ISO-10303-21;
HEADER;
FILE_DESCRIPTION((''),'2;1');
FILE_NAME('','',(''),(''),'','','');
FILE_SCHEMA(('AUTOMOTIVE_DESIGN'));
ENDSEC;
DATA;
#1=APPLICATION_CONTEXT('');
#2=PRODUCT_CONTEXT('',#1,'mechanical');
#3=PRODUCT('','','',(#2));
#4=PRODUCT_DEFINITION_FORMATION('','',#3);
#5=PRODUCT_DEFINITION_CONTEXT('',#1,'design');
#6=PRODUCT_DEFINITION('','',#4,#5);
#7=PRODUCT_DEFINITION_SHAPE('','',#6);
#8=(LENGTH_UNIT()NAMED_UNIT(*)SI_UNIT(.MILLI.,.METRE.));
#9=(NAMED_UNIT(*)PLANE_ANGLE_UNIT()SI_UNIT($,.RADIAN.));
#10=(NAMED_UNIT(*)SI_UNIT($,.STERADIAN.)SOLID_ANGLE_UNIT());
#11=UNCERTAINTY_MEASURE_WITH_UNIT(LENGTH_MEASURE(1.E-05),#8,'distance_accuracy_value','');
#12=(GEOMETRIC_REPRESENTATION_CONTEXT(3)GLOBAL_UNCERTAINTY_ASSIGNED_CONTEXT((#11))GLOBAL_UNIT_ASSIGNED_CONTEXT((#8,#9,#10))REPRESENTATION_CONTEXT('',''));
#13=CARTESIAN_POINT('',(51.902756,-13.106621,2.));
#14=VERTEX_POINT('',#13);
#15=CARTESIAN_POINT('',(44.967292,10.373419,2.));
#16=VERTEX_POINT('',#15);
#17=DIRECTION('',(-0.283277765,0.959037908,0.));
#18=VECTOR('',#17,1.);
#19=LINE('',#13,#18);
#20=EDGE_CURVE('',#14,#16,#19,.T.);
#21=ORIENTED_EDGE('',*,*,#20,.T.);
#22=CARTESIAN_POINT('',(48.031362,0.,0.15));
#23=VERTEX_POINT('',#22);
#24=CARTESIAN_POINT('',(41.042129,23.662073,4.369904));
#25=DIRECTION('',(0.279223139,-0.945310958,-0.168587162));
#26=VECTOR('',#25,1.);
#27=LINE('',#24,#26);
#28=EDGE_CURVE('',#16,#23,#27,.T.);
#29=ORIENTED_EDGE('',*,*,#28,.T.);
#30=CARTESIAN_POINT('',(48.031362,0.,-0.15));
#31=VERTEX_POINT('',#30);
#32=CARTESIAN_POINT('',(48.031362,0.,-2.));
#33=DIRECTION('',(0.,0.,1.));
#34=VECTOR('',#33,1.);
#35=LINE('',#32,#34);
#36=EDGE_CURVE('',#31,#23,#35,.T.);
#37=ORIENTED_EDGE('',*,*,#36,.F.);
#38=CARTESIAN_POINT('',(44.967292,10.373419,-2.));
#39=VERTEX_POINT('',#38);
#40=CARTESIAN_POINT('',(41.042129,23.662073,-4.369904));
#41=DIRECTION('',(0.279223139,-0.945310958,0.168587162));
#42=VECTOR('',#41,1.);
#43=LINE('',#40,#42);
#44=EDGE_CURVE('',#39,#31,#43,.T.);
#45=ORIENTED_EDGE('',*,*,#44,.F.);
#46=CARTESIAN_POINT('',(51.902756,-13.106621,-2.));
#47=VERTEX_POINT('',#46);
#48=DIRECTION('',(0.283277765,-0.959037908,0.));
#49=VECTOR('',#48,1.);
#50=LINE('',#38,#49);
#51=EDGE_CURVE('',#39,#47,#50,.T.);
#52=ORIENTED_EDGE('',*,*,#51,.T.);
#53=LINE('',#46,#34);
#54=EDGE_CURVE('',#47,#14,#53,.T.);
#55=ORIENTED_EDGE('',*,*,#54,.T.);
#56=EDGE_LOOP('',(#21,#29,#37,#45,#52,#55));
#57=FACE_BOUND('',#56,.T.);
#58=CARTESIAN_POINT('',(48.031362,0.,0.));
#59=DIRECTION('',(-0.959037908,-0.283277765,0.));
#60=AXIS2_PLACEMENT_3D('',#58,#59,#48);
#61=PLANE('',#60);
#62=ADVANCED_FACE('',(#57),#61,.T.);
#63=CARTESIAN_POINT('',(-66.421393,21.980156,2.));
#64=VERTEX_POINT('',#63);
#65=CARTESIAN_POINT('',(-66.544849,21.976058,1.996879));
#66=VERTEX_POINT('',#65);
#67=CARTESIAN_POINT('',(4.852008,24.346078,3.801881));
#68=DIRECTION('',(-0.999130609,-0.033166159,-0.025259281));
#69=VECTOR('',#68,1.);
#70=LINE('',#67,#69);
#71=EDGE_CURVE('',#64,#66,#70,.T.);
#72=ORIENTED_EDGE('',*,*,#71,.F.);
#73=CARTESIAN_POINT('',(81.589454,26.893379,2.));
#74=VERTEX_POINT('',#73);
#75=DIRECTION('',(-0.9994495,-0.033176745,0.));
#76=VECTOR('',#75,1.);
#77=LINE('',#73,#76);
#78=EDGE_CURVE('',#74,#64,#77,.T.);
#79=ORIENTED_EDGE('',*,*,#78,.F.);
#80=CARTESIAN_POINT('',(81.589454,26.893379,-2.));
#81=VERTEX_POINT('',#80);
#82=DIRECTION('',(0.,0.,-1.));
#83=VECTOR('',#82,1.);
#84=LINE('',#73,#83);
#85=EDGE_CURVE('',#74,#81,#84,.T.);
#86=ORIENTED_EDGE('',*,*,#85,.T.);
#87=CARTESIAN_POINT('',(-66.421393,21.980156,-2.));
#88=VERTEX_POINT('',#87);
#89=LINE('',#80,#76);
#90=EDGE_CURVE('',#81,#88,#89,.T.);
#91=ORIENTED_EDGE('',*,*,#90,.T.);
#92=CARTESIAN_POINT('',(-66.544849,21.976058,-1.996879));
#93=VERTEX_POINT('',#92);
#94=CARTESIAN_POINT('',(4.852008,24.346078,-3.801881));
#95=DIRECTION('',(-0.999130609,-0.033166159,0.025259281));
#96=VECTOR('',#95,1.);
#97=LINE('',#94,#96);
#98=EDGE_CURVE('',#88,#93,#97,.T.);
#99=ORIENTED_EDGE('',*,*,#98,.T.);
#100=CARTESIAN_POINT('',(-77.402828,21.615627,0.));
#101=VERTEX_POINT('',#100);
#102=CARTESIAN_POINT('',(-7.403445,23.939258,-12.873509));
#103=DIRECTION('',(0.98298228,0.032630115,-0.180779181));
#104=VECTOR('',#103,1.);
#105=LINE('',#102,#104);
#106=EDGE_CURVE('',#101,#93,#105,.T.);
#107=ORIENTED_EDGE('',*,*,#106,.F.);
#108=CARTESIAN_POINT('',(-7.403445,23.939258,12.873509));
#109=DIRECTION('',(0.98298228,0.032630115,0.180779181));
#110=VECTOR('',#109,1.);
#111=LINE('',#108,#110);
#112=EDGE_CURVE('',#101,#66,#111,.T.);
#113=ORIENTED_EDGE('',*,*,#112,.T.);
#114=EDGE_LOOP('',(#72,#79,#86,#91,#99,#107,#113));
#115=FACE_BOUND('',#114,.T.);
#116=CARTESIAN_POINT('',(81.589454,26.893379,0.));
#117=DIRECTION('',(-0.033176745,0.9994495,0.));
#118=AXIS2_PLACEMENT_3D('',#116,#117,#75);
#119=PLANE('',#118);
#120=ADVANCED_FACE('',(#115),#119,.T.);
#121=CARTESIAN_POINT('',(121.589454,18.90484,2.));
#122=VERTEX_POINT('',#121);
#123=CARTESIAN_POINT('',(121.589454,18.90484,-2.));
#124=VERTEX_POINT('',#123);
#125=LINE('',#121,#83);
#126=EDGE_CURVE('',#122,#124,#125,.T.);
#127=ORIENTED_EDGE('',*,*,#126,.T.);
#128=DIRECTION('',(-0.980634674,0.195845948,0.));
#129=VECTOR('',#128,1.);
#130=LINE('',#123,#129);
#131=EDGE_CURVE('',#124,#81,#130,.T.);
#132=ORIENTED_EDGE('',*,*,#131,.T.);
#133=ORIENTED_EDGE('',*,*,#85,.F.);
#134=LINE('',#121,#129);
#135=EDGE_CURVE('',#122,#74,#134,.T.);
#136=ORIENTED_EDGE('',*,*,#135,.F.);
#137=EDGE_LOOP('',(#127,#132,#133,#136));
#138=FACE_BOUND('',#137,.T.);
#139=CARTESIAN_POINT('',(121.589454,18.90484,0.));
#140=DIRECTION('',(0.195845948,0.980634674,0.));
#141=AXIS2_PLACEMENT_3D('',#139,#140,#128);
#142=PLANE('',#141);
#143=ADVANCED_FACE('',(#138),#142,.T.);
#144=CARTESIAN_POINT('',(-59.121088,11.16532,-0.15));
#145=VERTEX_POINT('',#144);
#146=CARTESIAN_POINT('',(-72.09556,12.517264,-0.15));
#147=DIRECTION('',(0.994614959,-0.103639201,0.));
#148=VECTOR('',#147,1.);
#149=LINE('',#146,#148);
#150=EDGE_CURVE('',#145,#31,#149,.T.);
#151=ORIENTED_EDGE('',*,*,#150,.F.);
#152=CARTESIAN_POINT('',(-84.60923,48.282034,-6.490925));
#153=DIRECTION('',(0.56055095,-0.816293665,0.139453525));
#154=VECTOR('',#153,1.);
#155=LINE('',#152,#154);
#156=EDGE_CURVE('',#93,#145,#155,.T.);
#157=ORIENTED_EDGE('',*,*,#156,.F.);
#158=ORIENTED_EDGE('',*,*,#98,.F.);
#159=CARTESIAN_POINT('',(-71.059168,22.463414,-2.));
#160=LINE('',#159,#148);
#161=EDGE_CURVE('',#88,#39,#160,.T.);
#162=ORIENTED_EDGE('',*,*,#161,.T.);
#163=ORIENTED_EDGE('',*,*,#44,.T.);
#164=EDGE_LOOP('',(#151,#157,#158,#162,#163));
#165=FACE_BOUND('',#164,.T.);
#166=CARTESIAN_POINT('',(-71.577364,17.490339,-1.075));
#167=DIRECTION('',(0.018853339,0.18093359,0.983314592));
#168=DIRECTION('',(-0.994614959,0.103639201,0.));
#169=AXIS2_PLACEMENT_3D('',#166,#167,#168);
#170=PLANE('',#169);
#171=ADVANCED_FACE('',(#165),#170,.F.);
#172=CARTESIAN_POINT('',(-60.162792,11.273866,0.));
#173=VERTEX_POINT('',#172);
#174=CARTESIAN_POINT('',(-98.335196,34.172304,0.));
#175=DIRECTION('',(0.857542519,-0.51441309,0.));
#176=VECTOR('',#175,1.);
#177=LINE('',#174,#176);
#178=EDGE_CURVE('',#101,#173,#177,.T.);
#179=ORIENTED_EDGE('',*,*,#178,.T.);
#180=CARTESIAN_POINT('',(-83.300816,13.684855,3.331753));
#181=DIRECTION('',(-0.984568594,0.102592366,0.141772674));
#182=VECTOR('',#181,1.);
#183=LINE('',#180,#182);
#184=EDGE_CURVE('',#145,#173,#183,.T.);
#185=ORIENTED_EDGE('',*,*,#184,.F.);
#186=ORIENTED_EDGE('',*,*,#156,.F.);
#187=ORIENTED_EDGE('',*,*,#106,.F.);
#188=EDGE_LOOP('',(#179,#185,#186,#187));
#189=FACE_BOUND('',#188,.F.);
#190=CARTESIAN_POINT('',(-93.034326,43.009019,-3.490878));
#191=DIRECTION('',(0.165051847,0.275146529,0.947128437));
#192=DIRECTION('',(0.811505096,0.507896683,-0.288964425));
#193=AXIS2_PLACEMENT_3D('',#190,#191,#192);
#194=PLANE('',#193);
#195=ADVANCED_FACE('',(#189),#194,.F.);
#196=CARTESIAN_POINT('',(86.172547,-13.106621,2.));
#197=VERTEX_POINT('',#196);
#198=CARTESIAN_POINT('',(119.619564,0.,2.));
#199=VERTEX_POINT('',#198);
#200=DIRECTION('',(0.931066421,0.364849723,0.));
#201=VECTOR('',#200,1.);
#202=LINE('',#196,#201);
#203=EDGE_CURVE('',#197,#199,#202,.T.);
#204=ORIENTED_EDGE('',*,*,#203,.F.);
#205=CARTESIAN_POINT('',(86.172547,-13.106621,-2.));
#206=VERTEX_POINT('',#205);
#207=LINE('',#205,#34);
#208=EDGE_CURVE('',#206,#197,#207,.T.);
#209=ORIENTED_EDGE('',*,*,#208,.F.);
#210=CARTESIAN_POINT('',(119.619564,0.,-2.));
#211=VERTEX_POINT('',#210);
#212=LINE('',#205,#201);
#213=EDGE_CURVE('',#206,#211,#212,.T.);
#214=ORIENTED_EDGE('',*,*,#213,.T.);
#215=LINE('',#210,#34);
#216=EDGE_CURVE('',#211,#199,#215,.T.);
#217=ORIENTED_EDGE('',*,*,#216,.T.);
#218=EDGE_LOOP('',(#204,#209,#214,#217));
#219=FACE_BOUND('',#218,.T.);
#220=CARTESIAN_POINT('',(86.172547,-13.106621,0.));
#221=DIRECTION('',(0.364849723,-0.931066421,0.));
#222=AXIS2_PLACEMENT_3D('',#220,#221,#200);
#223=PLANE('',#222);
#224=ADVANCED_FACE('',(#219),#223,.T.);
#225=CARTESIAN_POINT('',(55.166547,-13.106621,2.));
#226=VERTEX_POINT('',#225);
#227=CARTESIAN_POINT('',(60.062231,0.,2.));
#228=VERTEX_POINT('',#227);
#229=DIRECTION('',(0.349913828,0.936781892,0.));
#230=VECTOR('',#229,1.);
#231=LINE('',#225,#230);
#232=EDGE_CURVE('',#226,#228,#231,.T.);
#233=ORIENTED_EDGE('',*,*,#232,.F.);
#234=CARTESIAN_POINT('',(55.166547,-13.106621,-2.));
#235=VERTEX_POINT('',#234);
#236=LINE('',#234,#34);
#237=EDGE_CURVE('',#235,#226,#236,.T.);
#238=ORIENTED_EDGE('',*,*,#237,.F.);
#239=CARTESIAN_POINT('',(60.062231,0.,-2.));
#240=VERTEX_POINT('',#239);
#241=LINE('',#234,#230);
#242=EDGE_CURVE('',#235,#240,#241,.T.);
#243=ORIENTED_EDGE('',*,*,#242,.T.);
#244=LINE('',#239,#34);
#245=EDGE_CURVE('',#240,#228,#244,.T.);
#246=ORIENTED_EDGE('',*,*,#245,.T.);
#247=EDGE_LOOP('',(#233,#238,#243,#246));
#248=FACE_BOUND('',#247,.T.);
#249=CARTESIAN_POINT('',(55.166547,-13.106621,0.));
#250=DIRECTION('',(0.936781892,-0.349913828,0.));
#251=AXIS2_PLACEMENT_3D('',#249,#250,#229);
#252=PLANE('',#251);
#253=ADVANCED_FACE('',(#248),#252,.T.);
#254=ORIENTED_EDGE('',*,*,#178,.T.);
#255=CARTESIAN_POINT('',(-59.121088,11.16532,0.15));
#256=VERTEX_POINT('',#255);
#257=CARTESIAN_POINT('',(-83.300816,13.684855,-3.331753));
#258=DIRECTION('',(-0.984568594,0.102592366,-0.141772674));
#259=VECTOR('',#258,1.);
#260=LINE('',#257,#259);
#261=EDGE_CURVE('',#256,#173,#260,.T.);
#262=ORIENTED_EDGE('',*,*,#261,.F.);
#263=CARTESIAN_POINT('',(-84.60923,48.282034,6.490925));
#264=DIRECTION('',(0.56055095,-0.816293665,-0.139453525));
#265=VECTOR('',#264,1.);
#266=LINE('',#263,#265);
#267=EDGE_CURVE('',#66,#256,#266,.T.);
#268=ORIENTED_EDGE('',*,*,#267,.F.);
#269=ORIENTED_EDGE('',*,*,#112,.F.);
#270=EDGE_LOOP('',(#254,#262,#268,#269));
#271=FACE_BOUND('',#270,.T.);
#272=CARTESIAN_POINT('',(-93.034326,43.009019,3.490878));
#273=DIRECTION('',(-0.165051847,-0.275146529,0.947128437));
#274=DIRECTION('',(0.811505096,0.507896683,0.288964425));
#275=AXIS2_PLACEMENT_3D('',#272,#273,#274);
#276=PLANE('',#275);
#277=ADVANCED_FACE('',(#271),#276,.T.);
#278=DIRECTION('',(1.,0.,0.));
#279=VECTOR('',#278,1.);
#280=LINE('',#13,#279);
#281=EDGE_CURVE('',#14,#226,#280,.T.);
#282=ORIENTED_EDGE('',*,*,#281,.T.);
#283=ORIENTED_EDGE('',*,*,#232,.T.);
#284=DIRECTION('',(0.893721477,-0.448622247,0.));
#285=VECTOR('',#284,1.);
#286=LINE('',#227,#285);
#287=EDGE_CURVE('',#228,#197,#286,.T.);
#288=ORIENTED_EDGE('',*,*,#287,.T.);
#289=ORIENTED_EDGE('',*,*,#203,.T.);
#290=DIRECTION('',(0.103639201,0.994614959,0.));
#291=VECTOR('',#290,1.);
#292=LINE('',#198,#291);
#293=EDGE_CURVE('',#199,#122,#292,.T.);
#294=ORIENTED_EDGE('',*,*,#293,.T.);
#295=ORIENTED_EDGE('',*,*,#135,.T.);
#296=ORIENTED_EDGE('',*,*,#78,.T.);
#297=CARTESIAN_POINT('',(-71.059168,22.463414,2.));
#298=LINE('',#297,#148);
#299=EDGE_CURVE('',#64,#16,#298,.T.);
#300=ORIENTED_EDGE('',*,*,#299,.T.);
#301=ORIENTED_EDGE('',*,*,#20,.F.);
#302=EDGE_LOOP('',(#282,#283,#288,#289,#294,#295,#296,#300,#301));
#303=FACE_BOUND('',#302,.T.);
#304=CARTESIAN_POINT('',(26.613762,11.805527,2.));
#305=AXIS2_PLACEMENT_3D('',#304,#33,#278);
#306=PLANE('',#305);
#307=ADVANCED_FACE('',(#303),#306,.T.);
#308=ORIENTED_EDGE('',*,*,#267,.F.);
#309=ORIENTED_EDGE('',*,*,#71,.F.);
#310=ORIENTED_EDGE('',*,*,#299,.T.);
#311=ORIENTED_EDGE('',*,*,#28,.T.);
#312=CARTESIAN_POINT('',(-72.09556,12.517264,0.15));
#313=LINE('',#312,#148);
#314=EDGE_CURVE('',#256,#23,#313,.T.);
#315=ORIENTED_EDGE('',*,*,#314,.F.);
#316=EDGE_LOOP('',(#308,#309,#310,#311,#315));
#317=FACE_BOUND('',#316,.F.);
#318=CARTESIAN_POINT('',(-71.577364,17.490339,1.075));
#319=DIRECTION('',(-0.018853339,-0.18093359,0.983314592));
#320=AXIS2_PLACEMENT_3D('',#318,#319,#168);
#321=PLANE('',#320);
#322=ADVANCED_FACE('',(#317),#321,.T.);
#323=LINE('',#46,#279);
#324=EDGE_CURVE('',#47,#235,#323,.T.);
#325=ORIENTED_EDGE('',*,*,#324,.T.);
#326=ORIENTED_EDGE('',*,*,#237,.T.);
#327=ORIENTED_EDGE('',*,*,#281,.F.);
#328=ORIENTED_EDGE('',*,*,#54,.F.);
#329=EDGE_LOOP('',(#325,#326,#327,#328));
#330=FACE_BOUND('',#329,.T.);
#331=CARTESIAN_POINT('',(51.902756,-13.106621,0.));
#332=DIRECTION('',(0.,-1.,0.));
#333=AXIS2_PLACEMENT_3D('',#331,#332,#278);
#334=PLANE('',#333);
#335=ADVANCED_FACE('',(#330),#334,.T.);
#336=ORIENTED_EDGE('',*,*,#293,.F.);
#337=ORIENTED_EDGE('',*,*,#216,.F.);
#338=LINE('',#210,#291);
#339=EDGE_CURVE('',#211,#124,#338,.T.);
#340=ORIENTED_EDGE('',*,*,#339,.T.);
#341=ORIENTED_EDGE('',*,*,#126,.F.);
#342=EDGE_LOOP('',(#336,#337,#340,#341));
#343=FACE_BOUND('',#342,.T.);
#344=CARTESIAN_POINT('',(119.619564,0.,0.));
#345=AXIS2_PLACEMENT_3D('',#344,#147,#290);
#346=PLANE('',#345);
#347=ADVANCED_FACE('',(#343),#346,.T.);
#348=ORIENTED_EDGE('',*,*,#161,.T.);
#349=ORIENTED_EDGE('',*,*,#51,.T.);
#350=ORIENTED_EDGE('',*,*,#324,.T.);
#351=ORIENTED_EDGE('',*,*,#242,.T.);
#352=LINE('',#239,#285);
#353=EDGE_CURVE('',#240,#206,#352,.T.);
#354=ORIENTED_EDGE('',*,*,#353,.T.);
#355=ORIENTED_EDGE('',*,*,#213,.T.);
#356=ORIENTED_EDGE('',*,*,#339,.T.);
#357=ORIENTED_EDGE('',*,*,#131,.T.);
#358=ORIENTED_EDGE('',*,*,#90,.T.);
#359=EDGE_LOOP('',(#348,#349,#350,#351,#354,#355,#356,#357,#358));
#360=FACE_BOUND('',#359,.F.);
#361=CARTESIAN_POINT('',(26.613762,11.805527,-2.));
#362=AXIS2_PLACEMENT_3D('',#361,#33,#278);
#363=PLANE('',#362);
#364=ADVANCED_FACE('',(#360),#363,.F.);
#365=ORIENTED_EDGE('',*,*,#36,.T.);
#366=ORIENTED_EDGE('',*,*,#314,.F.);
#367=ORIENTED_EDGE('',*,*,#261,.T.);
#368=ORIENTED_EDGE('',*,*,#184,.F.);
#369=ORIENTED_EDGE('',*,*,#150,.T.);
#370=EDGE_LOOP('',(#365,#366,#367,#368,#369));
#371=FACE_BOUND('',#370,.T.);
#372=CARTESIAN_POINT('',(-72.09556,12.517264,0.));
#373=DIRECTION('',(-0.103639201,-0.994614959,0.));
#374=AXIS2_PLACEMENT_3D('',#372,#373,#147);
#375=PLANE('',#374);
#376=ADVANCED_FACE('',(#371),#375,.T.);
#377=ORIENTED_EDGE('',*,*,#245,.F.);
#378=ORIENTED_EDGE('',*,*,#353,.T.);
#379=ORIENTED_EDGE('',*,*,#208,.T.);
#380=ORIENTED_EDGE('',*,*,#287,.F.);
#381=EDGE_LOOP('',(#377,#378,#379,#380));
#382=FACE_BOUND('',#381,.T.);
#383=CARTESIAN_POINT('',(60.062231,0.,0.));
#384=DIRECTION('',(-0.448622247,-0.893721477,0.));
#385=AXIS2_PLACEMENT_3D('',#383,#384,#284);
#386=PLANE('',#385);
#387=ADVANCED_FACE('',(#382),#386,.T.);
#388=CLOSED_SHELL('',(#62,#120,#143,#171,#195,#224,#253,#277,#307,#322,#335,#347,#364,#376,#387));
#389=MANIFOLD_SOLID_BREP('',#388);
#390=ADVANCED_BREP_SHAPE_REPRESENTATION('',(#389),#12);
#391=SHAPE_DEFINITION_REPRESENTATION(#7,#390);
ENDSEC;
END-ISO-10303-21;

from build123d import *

# Parameters (mm, degrees)
F1_DEPTH    = 2
F2_SIZE2    = 1.85
F2_SIZE     = 10
F2_2_SIZE2  = 1.85
F2_2_SIZE   = 10
F3_T1_DEPTH = 63.0781913019
F3_T3_DEPTH = 63.0781913019


# Not quite as in the source:
# - a fillet or chamfer that OpenCascade refuses, or shapes differently, is made with other operations: its cross-section is extruded or revolved along the edge and cut away or added


with BuildPart() as f1:
    # F0 (on Top) → F1 (new body, symmetric)
    with BuildSketch(Plane.XY):
        Polygon((-78.3224657339, 21.585099696), (-72.0955598013, 12.517264094), (48.031361701, 0), (51.9027564591, -13.106621107), (55.166546928, -13.106621107), (60.0622307678, 0), (86.172547065, -13.106621107), (119.6195638295, 0), (121.5894543095, 18.9048403295), (81.5894543095, 26.893378893), align=None)
    extrude(amount=F1_DEPTH, both=True)

    # F2
    f2_edges = [f1.edges().sort_by_distance(p)[0] for p in [
        (-12.032099, 6.258632, 2),
    ]]
    f2_side = f1.faces().sort_by_distance((40.734375, 11.652616, 2))[0]
    chamfer(f2_edges, length=F2_SIZE, length2=F2_SIZE2, reference=f2_side)

    # F2#2
    f2_2_edges = [f1.edges().sort_by_distance(p)[0] for p in [
        (-12.032099, 6.258632, -2),
    ]]
    f2_2_side = f1.faces().sort_by_distance((40.734375, 11.652616, -2))[0]
    chamfer(f2_2_edges, length=F2_2_SIZE, length2=F2_2_SIZE2, reference=f2_2_side)

    # F3: chamfer of 1.85 x 10 on 2 edges, made by hand

    # F3_s2 → F3_t1 (cut)
    with BuildSketch(Plane(origin=(-49.185702612, 71.6259198522, -12.2363892176), x_dir=(0.8243486911, 0.5660823575, 0), z_dir=(0.5605509501, -0.8162936645, 0.1394535249))):
        Polygon((-52.3460779882, 8.8318101599), (-42.4159004982, 5.802159781), (-52.3460779882, 6.9818101599), align=None)
    extrude(amount=F3_T1_DEPTH, mode=Mode.SUBTRACT)

    # F3_s4 → F3_t3 (cut)
    with BuildSketch(Plane(origin=(-49.185702612, 71.6259198522, 12.2363892176), x_dir=(0.8243486911, 0.5660823575, 0), z_dir=(0.5605509501, -0.8162936645, -0.1394535249))):
        Polygon((-52.3460779882, -8.8318101599), (-42.4159004982, -5.802159781), (-52.3460779882, -6.9818101599), align=None)
    extrude(amount=F3_T3_DEPTH, mode=Mode.SUBTRACT)


solid = f1.part
